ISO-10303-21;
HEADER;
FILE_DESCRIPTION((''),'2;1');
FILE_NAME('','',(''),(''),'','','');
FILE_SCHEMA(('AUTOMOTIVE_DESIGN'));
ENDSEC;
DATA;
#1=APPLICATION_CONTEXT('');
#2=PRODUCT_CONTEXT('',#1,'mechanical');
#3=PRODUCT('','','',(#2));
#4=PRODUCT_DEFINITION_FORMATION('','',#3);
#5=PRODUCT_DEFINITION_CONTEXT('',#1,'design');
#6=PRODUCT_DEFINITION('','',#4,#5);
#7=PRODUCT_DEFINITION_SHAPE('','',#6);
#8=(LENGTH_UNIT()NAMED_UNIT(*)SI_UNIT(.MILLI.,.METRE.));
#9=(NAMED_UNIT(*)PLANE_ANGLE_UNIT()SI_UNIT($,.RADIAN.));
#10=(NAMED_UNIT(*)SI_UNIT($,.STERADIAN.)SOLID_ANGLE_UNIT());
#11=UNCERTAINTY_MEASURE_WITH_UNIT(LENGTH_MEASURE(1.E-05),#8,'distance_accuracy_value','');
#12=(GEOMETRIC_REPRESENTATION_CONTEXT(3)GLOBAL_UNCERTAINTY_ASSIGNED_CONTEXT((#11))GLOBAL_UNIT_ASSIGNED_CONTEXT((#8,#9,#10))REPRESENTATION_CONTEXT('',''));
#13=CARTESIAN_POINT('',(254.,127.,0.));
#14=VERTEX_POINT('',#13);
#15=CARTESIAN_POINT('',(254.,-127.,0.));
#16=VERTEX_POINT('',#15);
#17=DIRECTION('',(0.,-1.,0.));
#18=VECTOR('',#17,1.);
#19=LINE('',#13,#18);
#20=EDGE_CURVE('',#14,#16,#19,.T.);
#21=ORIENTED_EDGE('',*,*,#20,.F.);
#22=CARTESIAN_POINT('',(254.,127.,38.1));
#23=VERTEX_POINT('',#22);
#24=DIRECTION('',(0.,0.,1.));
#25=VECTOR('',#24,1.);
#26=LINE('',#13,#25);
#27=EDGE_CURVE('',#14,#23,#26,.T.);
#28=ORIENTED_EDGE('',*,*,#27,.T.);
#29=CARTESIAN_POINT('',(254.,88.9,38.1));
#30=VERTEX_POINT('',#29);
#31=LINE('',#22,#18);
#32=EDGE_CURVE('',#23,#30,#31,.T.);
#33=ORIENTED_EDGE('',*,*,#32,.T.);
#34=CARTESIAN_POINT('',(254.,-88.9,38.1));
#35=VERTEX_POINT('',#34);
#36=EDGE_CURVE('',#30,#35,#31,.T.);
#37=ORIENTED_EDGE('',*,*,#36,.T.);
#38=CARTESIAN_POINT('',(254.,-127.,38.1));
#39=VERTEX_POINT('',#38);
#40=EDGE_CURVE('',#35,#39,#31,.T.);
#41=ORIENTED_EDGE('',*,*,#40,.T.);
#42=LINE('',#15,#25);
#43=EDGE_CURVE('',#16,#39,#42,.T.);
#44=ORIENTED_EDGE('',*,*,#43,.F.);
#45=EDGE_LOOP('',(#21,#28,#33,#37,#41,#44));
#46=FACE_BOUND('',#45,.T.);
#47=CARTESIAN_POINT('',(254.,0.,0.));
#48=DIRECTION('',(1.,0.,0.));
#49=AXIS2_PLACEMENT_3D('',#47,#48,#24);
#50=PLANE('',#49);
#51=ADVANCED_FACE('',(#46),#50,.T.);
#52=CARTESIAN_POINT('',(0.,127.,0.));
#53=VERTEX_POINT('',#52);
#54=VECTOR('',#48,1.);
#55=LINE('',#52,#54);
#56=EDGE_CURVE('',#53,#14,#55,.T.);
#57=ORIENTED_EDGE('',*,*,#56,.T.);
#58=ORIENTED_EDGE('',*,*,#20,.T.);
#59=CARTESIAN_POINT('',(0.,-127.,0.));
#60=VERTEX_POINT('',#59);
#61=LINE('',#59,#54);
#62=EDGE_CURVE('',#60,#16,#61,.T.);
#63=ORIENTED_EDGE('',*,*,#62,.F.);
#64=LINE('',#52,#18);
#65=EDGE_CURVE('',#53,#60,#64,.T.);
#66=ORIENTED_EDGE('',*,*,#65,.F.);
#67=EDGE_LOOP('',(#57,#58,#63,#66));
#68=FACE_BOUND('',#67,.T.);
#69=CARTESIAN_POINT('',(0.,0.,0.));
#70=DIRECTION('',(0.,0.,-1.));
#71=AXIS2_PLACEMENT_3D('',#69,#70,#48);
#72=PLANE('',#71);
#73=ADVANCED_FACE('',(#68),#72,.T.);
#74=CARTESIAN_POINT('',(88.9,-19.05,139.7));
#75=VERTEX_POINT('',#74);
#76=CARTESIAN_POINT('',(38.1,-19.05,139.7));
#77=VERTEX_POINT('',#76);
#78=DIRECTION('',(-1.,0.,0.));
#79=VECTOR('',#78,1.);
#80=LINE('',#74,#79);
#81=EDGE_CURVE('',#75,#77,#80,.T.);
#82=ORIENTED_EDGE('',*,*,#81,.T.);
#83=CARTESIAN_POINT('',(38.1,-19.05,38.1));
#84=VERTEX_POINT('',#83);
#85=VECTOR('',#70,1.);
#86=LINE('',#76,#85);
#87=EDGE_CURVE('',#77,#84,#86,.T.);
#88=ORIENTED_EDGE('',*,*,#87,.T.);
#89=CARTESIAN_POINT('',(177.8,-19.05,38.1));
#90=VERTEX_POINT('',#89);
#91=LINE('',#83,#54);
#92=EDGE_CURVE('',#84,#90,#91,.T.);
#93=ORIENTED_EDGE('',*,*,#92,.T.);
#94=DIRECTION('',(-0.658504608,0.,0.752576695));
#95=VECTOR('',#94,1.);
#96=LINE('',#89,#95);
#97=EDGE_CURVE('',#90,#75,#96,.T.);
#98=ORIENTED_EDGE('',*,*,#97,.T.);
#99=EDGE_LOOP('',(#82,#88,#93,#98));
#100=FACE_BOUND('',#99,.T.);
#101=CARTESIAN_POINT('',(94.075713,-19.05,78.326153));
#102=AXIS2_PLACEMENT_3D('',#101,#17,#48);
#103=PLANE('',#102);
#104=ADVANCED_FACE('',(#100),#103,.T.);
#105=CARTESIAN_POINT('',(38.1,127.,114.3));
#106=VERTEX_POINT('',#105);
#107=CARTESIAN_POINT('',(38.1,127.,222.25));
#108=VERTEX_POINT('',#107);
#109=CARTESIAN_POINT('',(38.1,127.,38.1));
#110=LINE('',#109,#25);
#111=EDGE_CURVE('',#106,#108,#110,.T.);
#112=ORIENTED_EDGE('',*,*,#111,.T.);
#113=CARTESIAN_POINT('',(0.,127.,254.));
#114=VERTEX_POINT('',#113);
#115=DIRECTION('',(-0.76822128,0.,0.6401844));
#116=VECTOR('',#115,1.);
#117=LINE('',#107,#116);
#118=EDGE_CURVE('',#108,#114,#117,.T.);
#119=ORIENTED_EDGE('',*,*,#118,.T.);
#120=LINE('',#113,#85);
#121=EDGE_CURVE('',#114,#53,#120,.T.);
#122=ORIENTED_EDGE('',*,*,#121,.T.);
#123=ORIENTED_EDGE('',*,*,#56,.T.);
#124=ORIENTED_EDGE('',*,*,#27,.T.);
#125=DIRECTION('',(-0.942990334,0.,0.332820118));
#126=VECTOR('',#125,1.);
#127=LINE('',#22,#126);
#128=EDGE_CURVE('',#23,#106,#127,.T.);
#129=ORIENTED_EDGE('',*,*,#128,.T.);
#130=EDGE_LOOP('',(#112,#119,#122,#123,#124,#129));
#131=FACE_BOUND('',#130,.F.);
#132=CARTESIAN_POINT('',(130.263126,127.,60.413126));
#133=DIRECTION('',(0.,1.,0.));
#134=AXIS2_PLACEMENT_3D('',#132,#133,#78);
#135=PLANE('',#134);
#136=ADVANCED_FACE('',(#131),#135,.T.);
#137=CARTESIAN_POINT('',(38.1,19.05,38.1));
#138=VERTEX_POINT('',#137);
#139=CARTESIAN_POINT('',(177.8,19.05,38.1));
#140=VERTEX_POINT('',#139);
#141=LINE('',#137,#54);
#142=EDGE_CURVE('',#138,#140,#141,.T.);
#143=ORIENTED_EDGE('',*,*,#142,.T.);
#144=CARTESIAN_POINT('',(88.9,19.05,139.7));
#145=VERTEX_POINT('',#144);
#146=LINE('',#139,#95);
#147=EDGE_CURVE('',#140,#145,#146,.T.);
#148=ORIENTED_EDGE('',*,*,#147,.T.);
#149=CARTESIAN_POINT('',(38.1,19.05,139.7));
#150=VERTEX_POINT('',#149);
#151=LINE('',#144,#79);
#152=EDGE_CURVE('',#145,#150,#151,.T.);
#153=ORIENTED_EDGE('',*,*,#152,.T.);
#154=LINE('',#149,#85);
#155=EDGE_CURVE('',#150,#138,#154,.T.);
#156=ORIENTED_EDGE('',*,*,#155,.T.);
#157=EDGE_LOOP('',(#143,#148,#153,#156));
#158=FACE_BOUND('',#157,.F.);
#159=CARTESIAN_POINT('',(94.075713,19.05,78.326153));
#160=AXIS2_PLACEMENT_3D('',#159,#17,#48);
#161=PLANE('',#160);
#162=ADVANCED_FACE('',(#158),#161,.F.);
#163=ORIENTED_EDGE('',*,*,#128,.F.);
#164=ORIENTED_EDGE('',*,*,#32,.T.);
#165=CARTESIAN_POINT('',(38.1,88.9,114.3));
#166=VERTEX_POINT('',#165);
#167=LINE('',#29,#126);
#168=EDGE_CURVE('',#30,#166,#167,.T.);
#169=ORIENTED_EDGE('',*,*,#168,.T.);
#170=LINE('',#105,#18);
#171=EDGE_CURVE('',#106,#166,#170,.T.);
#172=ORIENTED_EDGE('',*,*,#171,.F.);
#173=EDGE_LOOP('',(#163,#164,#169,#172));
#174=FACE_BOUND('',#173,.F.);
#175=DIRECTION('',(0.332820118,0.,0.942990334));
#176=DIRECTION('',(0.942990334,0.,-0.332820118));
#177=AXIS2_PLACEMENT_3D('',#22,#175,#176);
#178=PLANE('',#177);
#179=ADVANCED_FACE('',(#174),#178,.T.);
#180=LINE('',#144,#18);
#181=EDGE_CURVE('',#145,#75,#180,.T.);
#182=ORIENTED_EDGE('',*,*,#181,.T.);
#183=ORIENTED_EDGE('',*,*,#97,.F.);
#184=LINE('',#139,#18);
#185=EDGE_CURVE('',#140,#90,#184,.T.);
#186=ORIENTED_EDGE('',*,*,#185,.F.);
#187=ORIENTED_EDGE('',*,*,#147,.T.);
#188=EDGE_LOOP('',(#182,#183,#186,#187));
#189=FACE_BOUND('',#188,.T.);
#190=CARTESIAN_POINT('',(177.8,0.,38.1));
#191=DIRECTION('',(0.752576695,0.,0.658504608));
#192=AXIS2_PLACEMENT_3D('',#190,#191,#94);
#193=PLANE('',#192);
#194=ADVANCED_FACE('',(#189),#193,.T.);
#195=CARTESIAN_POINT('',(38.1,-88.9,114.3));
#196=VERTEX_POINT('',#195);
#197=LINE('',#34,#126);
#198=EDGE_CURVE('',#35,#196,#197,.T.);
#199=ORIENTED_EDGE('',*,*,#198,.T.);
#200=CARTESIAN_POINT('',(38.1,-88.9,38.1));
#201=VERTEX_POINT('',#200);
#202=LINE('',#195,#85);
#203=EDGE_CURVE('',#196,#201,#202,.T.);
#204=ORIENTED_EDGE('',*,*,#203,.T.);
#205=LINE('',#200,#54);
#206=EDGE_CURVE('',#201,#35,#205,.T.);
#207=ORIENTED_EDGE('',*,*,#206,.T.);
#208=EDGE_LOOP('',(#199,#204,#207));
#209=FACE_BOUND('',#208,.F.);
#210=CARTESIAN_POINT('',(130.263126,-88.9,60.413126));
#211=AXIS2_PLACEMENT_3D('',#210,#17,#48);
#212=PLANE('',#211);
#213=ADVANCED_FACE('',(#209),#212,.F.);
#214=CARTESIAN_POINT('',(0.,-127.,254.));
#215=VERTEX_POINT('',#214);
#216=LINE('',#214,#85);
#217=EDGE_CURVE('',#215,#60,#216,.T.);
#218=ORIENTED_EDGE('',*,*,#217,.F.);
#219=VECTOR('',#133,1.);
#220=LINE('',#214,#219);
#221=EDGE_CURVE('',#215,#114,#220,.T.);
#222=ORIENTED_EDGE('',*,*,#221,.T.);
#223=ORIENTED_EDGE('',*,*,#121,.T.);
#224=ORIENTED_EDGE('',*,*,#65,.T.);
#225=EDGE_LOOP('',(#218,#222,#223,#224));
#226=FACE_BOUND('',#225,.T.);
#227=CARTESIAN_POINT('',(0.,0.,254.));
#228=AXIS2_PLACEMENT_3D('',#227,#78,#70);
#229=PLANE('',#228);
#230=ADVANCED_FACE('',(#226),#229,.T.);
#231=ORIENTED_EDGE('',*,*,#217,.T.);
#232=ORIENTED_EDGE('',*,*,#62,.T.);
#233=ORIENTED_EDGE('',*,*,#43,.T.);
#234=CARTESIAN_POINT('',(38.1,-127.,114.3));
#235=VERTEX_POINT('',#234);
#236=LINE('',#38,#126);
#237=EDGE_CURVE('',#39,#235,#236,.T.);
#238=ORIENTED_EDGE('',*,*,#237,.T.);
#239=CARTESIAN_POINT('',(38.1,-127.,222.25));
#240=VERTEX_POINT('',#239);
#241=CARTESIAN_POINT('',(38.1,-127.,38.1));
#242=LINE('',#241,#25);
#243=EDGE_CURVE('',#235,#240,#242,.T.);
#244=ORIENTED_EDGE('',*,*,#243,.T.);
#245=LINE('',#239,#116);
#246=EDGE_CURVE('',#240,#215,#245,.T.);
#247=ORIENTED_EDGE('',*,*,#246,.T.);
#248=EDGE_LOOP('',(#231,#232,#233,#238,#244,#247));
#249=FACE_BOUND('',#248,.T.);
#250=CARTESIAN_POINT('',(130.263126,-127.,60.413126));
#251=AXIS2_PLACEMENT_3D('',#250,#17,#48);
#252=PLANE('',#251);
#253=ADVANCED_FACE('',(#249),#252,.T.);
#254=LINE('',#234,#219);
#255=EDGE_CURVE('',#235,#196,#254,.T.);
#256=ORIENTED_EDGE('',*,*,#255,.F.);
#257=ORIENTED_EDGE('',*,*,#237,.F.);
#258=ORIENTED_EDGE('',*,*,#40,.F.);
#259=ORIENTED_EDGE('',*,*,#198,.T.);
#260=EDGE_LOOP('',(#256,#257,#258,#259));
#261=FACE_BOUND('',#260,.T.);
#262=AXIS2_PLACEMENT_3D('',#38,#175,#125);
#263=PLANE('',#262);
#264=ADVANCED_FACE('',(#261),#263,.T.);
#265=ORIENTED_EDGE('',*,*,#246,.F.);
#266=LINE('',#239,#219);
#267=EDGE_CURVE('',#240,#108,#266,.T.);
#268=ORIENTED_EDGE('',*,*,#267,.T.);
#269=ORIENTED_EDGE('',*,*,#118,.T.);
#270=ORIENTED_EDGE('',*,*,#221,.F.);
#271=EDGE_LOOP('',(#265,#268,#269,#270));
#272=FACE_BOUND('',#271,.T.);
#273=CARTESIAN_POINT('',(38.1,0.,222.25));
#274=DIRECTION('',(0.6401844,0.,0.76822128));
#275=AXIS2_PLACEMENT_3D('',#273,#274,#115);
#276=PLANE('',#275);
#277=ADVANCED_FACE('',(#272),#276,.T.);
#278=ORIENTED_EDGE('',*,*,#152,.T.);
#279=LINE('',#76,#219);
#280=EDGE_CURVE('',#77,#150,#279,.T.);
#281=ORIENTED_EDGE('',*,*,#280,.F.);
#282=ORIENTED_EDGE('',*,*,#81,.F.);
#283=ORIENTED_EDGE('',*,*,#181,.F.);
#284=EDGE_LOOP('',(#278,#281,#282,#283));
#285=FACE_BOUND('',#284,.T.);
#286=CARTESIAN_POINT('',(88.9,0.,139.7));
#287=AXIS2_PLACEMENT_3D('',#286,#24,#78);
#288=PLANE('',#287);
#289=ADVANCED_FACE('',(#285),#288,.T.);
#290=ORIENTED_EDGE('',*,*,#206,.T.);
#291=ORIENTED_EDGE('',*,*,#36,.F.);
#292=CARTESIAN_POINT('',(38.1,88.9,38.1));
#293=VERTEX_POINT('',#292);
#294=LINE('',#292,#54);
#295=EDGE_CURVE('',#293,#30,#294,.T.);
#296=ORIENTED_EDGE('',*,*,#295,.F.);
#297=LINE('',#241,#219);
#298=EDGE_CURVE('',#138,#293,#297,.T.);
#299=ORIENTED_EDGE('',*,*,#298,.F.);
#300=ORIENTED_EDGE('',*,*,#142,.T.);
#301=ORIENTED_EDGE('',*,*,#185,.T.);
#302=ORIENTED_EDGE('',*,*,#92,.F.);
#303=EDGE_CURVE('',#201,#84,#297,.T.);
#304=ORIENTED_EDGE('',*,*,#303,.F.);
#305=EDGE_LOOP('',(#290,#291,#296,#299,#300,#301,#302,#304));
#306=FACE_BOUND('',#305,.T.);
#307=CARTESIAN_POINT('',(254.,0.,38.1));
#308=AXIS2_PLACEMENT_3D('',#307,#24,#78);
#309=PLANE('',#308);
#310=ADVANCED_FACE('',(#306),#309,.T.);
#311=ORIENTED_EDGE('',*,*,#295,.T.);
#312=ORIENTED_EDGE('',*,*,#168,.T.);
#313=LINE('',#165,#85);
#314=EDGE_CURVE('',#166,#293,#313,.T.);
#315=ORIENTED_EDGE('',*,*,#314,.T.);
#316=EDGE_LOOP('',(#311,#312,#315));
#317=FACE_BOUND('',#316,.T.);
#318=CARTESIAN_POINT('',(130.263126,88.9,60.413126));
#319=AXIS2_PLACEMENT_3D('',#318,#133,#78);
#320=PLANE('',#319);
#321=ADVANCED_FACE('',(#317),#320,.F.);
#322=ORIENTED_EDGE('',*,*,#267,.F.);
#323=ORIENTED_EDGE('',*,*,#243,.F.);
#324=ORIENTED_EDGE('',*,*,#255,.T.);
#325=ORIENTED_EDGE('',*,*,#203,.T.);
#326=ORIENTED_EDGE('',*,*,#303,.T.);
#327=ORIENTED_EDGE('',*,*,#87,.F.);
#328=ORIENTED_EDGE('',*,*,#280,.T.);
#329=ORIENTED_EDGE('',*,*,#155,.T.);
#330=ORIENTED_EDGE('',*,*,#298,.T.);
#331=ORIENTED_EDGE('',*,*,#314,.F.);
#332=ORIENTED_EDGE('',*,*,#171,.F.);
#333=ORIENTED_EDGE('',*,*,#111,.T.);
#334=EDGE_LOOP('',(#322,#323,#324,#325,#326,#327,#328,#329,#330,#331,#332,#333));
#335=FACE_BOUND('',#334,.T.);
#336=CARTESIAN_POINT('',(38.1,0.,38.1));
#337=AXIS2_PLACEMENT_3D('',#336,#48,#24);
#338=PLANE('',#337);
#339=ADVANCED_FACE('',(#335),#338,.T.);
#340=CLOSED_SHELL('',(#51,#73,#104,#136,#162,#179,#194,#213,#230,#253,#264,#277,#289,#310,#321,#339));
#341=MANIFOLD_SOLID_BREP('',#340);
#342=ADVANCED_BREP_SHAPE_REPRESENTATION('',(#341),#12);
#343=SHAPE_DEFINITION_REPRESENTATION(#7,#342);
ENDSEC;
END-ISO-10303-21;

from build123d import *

# Parameters (mm, degrees)
F1_DEPTH = 127
F2_DEPTH = 19.05
F4_DEPTH = 38.1


# Not quite as in the source:
# - a pattern or mirror of a feature is missing from the dataset's text; its kind, count and spacing are read off the source's solid


with BuildPart() as f1:
    # F0 (on Front) → F1 (new body, symmetric)
    with BuildSketch(Plane.XZ):
        Polygon((0, 254), (0, 0), (254, 0), (254, 38.1), (177.8, 38.1), (38.1, 38.1), (38.1, 139.7), (38.1, 222.25), align=None)
    extrude(amount=F1_DEPTH, both=True)

    # F0 (on Front) → F2 (join, symmetric)
    with BuildSketch(Plane.XZ):
        Polygon((38.1, 38.1), (177.8, 38.1), (88.9, 139.7), (38.1, 139.7), align=None)
    extrude(amount=F2_DEPTH, both=True)

    # F3 (on face) → F4 (join)
    with BuildSketch(Plane.XZ.offset(127)):
        Polygon((254, 38.1), (38.1, 114.3), (38.1, 38.1), align=None)
    f4 = extrude(amount=-F4_DEPTH)

    # F4_copies: F4 across plane
    add(f4.mirror(Plane.ZX))


solid = f1.part
